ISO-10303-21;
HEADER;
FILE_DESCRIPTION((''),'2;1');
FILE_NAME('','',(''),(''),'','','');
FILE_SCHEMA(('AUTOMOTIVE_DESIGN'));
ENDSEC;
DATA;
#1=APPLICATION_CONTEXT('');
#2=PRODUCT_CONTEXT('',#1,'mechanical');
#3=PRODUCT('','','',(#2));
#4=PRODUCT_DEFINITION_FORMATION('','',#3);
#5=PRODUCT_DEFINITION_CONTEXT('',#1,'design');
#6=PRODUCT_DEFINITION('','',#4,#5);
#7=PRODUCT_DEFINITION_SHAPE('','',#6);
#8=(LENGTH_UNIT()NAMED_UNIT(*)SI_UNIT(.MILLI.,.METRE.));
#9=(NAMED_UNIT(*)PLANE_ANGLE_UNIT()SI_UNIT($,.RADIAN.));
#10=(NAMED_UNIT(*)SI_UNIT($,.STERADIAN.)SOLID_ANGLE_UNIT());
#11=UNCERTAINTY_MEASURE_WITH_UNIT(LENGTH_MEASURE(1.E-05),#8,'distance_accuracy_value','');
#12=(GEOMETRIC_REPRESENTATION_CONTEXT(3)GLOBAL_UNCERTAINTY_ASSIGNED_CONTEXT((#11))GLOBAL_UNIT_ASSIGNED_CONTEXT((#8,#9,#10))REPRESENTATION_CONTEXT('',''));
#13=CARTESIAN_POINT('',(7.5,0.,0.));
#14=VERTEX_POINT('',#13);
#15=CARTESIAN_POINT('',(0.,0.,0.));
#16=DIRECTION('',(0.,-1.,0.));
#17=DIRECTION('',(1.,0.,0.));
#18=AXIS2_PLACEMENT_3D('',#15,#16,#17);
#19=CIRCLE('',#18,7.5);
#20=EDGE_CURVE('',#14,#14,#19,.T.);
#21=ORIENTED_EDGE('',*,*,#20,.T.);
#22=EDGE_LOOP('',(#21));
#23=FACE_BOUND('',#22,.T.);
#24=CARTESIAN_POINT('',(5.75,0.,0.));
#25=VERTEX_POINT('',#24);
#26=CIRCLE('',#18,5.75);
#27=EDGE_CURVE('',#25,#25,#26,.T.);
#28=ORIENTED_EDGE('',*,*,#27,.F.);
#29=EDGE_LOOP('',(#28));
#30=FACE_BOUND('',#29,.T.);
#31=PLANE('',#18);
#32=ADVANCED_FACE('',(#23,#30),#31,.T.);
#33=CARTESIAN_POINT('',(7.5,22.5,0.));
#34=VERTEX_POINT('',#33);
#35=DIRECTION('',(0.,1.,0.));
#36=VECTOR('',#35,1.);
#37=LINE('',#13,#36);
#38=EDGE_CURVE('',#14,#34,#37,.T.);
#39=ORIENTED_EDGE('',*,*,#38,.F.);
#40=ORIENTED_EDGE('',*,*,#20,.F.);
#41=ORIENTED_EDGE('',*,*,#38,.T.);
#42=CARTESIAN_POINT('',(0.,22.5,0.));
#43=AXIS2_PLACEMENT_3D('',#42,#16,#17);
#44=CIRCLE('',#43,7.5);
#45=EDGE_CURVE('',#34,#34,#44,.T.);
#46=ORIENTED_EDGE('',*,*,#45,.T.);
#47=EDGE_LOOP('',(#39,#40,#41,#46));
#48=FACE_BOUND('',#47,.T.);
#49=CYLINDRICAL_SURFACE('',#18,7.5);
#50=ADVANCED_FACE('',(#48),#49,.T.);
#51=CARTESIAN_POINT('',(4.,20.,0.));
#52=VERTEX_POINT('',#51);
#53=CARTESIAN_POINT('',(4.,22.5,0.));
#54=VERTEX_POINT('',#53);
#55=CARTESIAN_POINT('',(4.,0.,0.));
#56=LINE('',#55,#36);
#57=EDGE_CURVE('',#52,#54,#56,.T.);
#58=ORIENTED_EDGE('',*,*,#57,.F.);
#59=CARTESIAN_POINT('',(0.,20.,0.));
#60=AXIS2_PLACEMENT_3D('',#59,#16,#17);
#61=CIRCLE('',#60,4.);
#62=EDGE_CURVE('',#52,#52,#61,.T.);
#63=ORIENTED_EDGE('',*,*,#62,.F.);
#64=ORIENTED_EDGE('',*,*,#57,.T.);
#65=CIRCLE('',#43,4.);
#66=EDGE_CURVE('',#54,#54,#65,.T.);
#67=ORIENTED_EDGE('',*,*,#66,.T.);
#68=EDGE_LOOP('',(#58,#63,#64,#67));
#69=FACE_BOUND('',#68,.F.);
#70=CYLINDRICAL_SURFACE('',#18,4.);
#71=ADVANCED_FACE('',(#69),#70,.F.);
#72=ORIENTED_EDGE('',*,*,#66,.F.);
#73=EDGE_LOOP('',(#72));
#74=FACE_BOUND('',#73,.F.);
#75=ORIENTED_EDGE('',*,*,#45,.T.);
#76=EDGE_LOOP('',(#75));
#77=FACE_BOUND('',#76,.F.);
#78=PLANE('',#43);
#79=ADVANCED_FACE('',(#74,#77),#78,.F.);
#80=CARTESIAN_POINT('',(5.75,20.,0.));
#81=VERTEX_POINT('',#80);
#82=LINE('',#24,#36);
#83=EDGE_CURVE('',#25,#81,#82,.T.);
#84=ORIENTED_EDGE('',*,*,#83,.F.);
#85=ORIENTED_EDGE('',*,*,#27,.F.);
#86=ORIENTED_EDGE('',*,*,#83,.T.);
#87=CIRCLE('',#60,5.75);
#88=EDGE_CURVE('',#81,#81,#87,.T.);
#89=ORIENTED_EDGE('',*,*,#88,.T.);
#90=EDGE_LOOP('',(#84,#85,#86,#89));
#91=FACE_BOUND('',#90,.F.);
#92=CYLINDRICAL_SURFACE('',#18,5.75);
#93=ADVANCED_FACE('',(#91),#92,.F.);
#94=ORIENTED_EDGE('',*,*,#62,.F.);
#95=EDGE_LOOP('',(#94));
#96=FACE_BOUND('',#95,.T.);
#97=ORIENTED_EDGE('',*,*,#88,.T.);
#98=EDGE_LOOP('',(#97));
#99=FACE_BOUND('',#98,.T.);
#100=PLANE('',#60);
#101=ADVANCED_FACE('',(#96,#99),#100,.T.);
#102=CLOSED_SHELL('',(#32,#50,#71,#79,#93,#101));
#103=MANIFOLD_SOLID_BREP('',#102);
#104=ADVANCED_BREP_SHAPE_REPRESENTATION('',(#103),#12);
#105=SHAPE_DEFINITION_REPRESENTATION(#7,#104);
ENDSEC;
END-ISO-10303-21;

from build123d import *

# Parameters (mm, degrees)
F3_R     = 7.5
F3_R_2   = 4
F4_DEPTH = 22.5
F5_R     = 5.75
F5_R_2   = 4
F6_DEPTH = 20


# Not quite as in the source:
# - the program builds the solid bodies; features that only make, move or delete a surface that nothing else refers to are left out


with BuildPart() as f4:
    # F3 (on Front) → F4 (new body)
    with BuildSketch(Plane.XZ):
        Circle(F3_R)
        Circle(F3_R_2, mode=Mode.SUBTRACT)
    extrude(amount=-F4_DEPTH)

    # F5 (on face) → F6 (cut)
    with BuildSketch(Plane.XZ):
        Circle(F5_R)
        Circle(F5_R_2, mode=Mode.SUBTRACT)
    extrude(amount=-F6_DEPTH, mode=Mode.SUBTRACT)


solid = f4.part
